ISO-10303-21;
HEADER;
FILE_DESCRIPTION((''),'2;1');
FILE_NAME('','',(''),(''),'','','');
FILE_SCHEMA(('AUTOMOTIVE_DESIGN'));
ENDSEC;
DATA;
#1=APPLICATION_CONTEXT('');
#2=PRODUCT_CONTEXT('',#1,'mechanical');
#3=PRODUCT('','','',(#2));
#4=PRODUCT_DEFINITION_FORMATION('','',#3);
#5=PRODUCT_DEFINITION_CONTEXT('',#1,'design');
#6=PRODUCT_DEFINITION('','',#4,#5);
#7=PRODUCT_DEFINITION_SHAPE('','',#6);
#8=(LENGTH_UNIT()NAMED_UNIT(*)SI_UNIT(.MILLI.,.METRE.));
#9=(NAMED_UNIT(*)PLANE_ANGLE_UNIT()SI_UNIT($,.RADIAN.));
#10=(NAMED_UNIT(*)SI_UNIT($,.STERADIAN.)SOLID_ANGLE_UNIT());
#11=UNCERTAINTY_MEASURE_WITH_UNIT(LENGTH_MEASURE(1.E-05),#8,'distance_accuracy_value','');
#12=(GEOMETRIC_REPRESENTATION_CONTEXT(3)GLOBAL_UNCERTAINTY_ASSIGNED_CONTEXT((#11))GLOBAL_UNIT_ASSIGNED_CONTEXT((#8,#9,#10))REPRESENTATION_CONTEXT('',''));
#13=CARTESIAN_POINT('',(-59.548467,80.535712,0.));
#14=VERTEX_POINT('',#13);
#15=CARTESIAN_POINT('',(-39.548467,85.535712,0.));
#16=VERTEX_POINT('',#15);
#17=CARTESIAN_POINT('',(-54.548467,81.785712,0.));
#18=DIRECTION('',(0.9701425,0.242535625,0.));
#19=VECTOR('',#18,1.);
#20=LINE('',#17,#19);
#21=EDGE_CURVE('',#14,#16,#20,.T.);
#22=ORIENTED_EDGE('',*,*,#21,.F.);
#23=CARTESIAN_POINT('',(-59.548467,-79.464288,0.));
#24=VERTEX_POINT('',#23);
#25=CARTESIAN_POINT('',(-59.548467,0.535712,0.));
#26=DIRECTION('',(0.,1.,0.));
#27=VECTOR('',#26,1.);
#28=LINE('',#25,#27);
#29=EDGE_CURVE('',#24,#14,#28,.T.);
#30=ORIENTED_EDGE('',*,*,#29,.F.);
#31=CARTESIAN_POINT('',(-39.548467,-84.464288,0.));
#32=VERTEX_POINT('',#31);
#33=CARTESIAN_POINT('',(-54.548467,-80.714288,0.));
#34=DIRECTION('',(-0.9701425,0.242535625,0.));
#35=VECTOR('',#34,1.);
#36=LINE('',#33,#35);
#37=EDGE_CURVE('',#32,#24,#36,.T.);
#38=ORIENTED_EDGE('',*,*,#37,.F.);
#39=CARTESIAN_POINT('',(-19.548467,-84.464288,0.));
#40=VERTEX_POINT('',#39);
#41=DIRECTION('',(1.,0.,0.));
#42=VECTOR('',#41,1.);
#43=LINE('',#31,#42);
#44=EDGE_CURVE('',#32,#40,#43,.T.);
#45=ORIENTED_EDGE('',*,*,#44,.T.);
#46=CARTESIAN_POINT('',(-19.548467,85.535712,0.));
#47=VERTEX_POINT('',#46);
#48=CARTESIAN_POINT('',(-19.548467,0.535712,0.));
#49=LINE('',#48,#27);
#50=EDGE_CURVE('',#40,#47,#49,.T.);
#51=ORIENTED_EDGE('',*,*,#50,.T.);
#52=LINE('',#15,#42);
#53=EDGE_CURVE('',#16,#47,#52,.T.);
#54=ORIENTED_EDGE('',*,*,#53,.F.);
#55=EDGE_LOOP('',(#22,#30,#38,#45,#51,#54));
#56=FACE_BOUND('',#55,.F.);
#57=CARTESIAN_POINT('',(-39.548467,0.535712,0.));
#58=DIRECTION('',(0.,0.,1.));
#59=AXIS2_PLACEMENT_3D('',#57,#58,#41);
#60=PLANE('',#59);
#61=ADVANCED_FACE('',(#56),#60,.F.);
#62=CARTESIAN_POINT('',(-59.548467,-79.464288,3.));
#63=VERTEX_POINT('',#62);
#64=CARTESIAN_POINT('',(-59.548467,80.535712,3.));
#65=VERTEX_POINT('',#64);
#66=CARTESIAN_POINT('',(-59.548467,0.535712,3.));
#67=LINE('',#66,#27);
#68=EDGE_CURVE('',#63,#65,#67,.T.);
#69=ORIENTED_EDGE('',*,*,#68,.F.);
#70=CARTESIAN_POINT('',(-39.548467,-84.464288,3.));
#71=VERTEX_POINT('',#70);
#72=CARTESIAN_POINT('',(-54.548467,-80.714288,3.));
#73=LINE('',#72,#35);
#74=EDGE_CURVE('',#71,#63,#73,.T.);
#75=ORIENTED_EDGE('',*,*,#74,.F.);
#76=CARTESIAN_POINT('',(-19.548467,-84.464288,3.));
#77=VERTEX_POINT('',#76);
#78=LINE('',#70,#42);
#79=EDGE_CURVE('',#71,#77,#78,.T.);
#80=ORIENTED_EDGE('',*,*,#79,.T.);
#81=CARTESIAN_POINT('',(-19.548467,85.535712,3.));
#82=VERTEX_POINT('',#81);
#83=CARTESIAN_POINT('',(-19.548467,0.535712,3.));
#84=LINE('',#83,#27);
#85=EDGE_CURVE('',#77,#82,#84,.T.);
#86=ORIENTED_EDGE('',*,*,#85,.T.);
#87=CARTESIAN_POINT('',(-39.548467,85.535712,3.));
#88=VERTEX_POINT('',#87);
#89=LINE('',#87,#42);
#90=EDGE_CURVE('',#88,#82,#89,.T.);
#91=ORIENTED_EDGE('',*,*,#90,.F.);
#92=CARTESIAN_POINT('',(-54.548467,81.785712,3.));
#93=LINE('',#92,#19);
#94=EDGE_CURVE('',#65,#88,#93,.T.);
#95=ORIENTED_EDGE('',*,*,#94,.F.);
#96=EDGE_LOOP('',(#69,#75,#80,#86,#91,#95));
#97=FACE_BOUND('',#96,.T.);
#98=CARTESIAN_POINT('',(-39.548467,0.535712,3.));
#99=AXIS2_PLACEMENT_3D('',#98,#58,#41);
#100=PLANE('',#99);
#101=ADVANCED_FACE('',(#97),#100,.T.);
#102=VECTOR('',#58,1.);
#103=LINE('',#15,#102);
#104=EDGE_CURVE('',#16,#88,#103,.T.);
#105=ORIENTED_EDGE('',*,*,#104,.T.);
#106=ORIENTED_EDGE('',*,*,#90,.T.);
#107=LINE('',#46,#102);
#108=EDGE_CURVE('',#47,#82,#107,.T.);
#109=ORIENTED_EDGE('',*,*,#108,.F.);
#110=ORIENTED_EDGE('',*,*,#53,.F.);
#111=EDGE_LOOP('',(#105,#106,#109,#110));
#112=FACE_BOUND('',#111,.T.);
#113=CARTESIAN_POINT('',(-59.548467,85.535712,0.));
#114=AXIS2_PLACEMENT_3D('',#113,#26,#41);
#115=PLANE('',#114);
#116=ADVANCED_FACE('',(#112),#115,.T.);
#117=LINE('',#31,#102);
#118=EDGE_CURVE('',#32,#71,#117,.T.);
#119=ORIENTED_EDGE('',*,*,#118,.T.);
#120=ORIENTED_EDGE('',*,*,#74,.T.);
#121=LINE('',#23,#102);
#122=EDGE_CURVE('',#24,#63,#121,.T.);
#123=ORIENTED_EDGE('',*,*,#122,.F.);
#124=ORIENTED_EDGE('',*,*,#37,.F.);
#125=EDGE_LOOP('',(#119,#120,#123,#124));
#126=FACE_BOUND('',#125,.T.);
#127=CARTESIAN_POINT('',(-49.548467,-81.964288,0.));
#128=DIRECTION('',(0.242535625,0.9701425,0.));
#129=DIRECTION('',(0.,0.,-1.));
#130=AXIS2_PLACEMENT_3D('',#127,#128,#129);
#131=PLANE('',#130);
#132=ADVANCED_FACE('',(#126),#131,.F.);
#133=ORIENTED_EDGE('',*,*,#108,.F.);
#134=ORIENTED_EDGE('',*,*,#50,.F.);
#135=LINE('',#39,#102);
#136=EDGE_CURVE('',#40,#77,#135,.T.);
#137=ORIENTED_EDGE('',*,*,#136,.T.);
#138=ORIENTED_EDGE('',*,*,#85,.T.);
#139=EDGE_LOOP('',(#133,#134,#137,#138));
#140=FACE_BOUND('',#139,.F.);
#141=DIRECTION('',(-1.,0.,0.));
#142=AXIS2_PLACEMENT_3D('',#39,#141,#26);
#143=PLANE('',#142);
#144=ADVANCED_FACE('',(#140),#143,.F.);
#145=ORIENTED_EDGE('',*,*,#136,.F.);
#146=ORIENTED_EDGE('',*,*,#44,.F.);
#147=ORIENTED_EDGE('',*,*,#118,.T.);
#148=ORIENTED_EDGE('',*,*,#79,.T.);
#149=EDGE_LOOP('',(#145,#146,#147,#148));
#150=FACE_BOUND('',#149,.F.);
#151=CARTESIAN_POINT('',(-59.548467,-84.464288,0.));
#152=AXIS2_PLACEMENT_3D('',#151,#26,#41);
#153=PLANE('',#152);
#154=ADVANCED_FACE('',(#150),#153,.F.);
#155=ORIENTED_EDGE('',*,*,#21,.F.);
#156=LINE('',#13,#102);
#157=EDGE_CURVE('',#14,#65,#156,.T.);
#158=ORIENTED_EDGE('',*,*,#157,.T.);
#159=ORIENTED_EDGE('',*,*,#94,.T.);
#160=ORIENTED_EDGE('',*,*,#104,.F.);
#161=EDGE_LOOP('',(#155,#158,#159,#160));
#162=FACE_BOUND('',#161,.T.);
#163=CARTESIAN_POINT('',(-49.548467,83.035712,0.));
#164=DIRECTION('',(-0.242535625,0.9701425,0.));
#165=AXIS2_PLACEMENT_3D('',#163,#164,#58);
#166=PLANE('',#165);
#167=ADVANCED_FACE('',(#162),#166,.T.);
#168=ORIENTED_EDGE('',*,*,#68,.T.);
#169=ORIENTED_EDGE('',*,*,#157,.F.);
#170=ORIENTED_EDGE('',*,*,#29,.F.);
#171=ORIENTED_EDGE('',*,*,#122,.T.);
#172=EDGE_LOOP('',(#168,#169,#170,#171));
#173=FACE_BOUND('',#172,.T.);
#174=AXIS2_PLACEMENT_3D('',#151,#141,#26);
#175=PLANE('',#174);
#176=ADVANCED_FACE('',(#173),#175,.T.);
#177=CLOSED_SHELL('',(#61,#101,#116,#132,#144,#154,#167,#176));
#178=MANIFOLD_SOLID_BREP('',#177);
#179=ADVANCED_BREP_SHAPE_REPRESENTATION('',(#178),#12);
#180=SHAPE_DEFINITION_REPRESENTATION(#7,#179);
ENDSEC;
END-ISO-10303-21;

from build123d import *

# Parameters (mm, degrees)
F0_W     = 40
F0_H     = 170
F1_DEPTH = 3
F2_SIZE2 = 5
F2_SIZE  = 20
F3_SIZE2 = 20
F3_SIZE  = 5


with BuildPart() as f1:
    # F0 (on Top) → F1 (new body)
    with BuildSketch(Plane.XY):
        with Locations((-39.5484667792, 0.5357116461)):
            Rectangle(F0_W, F0_H)
    extrude(amount=F1_DEPTH)

    # F2
    f2_edges = [f1.edges().sort_by_distance(p)[0] for p in [
        (-59.548467, -84.464288, 1.5),
    ]]
    f2_side = f1.faces().sort_by_distance((-39.548467, -84.464288, 1.5))[0]
    chamfer(f2_edges, length=F2_SIZE, length2=F2_SIZE2, reference=f2_side)

    # F3
    f3_edges = [f1.edges().sort_by_distance(p)[0] for p in [
        (-59.548467, 85.535712, 1.5),
    ]]
    f3_side = f1.faces().sort_by_distance((-59.548467, 3.035712, 1.5))[0]
    chamfer(f3_edges, length=F3_SIZE, length2=F3_SIZE2, reference=f3_side)


solid = f1.part
